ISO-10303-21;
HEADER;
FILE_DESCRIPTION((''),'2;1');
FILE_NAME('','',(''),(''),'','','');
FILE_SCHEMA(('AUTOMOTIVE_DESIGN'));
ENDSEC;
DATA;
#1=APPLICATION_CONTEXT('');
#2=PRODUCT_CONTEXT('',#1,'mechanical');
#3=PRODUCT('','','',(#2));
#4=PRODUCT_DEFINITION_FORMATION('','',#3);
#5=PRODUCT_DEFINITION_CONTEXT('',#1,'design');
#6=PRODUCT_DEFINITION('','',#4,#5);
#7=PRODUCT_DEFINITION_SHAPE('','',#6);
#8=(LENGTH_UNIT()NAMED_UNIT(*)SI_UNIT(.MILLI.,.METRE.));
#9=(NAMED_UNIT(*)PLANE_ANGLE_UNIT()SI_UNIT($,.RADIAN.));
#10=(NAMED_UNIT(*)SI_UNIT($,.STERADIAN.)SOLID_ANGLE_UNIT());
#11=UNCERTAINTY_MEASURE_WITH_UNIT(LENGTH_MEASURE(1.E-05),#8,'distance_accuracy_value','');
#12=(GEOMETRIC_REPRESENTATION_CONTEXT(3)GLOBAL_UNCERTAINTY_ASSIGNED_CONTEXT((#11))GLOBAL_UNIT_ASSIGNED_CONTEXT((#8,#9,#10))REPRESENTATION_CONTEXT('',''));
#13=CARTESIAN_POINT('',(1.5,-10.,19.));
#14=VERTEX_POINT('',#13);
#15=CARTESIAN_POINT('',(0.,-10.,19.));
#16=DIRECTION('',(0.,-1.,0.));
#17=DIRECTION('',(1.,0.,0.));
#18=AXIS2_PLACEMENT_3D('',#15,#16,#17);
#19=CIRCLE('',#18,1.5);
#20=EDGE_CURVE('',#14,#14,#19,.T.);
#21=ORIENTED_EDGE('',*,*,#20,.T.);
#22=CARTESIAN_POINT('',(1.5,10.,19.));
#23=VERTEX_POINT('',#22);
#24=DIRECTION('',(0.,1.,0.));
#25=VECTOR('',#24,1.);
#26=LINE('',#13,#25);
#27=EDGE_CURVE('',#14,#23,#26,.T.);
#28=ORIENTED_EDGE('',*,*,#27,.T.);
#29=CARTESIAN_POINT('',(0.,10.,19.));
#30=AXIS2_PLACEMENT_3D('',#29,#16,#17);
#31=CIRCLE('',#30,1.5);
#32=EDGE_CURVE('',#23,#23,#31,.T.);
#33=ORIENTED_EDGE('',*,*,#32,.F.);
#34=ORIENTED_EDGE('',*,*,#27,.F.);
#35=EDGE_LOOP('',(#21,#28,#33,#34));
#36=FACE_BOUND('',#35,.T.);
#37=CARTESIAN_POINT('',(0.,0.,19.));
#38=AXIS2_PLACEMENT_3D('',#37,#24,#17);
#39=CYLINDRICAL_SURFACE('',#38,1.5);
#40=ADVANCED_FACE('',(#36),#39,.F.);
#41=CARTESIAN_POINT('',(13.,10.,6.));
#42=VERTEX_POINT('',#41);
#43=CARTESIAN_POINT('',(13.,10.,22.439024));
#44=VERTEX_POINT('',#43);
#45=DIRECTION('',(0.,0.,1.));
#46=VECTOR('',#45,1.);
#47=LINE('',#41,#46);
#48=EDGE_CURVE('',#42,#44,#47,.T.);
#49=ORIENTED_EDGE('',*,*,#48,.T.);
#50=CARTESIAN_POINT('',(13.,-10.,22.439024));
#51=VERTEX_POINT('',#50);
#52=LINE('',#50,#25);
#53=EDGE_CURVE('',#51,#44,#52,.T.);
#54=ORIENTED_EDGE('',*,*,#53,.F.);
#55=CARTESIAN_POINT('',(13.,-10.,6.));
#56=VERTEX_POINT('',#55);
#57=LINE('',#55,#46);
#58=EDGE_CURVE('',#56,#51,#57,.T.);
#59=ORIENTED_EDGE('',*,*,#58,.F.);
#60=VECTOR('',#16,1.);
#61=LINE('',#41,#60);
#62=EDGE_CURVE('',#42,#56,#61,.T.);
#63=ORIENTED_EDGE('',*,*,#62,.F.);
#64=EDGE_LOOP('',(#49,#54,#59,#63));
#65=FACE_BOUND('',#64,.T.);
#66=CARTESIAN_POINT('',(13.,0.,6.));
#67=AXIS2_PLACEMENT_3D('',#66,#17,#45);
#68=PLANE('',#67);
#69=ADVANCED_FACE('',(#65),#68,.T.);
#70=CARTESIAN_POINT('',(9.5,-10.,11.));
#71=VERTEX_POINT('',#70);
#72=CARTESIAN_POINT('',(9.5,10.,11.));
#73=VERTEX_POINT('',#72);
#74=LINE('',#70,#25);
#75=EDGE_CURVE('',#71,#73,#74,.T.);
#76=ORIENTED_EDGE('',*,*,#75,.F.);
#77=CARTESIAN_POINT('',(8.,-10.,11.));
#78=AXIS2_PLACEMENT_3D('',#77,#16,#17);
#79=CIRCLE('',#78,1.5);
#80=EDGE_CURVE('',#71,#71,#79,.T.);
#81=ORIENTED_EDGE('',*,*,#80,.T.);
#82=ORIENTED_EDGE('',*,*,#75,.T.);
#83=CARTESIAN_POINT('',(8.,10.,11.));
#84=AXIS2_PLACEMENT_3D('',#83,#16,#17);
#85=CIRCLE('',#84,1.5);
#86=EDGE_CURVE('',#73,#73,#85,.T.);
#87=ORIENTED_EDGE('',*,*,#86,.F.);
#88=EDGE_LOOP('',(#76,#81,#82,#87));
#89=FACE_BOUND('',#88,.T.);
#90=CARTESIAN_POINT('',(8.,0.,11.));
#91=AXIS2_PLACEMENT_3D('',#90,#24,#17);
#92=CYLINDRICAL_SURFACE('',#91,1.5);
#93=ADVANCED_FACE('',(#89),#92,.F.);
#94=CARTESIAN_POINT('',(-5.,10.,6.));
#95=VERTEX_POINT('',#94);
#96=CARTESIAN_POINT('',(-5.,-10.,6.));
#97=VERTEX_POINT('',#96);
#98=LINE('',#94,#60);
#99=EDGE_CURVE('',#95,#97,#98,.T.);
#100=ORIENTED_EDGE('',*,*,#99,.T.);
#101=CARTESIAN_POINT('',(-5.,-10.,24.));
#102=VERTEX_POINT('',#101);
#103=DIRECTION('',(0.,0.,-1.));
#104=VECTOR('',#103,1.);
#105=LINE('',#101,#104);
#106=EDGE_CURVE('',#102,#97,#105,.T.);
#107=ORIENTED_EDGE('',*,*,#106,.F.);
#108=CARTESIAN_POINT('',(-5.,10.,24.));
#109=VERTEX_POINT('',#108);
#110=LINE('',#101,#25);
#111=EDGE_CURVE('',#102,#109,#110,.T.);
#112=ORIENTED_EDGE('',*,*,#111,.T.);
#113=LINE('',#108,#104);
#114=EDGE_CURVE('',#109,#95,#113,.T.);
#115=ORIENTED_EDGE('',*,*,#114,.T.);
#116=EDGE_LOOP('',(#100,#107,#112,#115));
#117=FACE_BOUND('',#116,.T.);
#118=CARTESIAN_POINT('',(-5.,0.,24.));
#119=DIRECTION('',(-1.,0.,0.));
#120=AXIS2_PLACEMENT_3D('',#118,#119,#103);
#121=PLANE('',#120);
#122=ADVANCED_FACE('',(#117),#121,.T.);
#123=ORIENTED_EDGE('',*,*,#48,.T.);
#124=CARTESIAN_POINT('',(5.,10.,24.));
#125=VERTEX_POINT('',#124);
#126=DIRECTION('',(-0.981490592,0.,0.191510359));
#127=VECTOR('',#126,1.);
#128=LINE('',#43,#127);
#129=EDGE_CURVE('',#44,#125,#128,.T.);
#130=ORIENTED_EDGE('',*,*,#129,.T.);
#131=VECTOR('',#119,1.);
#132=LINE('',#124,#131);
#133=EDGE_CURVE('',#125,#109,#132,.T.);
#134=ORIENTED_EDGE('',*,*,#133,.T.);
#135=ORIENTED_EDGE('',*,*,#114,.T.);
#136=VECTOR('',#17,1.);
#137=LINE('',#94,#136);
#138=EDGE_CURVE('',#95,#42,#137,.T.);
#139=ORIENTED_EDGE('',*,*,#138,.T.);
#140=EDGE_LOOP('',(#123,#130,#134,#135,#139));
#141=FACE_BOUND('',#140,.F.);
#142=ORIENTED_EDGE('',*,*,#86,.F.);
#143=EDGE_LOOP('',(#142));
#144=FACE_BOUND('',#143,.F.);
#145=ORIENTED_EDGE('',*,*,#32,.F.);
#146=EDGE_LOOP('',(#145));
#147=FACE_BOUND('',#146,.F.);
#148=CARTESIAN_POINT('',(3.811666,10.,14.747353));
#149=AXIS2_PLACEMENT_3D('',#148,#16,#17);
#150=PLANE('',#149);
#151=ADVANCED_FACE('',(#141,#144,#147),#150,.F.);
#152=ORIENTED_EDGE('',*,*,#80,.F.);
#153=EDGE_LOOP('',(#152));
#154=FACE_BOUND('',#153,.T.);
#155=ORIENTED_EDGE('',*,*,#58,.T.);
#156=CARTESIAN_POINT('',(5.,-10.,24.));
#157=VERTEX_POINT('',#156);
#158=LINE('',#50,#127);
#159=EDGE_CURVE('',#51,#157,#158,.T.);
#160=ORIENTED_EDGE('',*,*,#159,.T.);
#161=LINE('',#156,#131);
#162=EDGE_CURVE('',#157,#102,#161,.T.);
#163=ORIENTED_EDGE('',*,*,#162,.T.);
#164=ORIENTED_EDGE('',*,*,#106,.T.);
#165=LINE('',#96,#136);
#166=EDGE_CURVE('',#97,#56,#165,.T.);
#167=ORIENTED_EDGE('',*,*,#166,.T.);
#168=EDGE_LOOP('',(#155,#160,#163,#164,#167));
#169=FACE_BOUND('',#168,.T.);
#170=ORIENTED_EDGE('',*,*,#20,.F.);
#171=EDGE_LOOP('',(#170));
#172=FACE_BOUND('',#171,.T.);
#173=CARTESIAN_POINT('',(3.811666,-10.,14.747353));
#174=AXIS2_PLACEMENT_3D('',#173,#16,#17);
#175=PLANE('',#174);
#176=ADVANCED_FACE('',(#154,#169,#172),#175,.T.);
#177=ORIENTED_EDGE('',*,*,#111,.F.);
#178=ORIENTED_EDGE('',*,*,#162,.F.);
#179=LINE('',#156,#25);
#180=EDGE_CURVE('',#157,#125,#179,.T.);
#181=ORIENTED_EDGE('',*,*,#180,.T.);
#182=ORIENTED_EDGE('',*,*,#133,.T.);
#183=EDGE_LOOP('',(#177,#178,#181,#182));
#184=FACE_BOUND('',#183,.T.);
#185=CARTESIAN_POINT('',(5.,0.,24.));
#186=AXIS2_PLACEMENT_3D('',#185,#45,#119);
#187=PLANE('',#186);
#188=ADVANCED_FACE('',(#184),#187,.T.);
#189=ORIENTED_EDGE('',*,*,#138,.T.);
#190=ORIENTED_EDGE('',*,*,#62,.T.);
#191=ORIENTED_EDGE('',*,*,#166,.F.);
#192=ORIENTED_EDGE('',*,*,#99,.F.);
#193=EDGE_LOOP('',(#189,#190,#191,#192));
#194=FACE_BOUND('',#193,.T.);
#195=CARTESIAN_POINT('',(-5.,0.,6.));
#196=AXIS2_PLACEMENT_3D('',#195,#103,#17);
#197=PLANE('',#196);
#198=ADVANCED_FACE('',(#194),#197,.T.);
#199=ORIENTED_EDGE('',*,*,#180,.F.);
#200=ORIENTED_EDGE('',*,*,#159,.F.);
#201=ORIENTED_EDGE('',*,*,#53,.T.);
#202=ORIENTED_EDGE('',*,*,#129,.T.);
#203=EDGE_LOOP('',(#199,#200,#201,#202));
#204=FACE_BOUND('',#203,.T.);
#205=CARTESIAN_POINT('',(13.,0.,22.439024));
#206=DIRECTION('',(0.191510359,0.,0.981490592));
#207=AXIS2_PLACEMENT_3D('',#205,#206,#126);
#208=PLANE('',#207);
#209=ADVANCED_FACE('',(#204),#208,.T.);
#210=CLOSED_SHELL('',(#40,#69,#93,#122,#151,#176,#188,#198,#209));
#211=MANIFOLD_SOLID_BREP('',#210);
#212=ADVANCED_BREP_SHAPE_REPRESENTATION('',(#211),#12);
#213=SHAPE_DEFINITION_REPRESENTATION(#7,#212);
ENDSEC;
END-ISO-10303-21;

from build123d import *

# Parameters (mm, degrees)
F0_R     = 1.5
F1_DEPTH = 10


# Not quite as in the source:
# - a feature names something its author has since deleted; it is built from what else it names


with BuildPart() as f1:
    # F0 (on Front) → F1 (new body, symmetric)
    with BuildSketch(Plane.XZ):
        Polygon((-5, 24), (-5, 6), (13, 6), (13, 22.4390243902), (5, 24), align=None)
        with Locations((8, 11)):
            Circle(F0_R, mode=Mode.SUBTRACT)
        with Locations((0, 19)):
            Circle(F0_R, mode=Mode.SUBTRACT)
    extrude(amount=F1_DEPTH, both=True)


solid = f1.part
